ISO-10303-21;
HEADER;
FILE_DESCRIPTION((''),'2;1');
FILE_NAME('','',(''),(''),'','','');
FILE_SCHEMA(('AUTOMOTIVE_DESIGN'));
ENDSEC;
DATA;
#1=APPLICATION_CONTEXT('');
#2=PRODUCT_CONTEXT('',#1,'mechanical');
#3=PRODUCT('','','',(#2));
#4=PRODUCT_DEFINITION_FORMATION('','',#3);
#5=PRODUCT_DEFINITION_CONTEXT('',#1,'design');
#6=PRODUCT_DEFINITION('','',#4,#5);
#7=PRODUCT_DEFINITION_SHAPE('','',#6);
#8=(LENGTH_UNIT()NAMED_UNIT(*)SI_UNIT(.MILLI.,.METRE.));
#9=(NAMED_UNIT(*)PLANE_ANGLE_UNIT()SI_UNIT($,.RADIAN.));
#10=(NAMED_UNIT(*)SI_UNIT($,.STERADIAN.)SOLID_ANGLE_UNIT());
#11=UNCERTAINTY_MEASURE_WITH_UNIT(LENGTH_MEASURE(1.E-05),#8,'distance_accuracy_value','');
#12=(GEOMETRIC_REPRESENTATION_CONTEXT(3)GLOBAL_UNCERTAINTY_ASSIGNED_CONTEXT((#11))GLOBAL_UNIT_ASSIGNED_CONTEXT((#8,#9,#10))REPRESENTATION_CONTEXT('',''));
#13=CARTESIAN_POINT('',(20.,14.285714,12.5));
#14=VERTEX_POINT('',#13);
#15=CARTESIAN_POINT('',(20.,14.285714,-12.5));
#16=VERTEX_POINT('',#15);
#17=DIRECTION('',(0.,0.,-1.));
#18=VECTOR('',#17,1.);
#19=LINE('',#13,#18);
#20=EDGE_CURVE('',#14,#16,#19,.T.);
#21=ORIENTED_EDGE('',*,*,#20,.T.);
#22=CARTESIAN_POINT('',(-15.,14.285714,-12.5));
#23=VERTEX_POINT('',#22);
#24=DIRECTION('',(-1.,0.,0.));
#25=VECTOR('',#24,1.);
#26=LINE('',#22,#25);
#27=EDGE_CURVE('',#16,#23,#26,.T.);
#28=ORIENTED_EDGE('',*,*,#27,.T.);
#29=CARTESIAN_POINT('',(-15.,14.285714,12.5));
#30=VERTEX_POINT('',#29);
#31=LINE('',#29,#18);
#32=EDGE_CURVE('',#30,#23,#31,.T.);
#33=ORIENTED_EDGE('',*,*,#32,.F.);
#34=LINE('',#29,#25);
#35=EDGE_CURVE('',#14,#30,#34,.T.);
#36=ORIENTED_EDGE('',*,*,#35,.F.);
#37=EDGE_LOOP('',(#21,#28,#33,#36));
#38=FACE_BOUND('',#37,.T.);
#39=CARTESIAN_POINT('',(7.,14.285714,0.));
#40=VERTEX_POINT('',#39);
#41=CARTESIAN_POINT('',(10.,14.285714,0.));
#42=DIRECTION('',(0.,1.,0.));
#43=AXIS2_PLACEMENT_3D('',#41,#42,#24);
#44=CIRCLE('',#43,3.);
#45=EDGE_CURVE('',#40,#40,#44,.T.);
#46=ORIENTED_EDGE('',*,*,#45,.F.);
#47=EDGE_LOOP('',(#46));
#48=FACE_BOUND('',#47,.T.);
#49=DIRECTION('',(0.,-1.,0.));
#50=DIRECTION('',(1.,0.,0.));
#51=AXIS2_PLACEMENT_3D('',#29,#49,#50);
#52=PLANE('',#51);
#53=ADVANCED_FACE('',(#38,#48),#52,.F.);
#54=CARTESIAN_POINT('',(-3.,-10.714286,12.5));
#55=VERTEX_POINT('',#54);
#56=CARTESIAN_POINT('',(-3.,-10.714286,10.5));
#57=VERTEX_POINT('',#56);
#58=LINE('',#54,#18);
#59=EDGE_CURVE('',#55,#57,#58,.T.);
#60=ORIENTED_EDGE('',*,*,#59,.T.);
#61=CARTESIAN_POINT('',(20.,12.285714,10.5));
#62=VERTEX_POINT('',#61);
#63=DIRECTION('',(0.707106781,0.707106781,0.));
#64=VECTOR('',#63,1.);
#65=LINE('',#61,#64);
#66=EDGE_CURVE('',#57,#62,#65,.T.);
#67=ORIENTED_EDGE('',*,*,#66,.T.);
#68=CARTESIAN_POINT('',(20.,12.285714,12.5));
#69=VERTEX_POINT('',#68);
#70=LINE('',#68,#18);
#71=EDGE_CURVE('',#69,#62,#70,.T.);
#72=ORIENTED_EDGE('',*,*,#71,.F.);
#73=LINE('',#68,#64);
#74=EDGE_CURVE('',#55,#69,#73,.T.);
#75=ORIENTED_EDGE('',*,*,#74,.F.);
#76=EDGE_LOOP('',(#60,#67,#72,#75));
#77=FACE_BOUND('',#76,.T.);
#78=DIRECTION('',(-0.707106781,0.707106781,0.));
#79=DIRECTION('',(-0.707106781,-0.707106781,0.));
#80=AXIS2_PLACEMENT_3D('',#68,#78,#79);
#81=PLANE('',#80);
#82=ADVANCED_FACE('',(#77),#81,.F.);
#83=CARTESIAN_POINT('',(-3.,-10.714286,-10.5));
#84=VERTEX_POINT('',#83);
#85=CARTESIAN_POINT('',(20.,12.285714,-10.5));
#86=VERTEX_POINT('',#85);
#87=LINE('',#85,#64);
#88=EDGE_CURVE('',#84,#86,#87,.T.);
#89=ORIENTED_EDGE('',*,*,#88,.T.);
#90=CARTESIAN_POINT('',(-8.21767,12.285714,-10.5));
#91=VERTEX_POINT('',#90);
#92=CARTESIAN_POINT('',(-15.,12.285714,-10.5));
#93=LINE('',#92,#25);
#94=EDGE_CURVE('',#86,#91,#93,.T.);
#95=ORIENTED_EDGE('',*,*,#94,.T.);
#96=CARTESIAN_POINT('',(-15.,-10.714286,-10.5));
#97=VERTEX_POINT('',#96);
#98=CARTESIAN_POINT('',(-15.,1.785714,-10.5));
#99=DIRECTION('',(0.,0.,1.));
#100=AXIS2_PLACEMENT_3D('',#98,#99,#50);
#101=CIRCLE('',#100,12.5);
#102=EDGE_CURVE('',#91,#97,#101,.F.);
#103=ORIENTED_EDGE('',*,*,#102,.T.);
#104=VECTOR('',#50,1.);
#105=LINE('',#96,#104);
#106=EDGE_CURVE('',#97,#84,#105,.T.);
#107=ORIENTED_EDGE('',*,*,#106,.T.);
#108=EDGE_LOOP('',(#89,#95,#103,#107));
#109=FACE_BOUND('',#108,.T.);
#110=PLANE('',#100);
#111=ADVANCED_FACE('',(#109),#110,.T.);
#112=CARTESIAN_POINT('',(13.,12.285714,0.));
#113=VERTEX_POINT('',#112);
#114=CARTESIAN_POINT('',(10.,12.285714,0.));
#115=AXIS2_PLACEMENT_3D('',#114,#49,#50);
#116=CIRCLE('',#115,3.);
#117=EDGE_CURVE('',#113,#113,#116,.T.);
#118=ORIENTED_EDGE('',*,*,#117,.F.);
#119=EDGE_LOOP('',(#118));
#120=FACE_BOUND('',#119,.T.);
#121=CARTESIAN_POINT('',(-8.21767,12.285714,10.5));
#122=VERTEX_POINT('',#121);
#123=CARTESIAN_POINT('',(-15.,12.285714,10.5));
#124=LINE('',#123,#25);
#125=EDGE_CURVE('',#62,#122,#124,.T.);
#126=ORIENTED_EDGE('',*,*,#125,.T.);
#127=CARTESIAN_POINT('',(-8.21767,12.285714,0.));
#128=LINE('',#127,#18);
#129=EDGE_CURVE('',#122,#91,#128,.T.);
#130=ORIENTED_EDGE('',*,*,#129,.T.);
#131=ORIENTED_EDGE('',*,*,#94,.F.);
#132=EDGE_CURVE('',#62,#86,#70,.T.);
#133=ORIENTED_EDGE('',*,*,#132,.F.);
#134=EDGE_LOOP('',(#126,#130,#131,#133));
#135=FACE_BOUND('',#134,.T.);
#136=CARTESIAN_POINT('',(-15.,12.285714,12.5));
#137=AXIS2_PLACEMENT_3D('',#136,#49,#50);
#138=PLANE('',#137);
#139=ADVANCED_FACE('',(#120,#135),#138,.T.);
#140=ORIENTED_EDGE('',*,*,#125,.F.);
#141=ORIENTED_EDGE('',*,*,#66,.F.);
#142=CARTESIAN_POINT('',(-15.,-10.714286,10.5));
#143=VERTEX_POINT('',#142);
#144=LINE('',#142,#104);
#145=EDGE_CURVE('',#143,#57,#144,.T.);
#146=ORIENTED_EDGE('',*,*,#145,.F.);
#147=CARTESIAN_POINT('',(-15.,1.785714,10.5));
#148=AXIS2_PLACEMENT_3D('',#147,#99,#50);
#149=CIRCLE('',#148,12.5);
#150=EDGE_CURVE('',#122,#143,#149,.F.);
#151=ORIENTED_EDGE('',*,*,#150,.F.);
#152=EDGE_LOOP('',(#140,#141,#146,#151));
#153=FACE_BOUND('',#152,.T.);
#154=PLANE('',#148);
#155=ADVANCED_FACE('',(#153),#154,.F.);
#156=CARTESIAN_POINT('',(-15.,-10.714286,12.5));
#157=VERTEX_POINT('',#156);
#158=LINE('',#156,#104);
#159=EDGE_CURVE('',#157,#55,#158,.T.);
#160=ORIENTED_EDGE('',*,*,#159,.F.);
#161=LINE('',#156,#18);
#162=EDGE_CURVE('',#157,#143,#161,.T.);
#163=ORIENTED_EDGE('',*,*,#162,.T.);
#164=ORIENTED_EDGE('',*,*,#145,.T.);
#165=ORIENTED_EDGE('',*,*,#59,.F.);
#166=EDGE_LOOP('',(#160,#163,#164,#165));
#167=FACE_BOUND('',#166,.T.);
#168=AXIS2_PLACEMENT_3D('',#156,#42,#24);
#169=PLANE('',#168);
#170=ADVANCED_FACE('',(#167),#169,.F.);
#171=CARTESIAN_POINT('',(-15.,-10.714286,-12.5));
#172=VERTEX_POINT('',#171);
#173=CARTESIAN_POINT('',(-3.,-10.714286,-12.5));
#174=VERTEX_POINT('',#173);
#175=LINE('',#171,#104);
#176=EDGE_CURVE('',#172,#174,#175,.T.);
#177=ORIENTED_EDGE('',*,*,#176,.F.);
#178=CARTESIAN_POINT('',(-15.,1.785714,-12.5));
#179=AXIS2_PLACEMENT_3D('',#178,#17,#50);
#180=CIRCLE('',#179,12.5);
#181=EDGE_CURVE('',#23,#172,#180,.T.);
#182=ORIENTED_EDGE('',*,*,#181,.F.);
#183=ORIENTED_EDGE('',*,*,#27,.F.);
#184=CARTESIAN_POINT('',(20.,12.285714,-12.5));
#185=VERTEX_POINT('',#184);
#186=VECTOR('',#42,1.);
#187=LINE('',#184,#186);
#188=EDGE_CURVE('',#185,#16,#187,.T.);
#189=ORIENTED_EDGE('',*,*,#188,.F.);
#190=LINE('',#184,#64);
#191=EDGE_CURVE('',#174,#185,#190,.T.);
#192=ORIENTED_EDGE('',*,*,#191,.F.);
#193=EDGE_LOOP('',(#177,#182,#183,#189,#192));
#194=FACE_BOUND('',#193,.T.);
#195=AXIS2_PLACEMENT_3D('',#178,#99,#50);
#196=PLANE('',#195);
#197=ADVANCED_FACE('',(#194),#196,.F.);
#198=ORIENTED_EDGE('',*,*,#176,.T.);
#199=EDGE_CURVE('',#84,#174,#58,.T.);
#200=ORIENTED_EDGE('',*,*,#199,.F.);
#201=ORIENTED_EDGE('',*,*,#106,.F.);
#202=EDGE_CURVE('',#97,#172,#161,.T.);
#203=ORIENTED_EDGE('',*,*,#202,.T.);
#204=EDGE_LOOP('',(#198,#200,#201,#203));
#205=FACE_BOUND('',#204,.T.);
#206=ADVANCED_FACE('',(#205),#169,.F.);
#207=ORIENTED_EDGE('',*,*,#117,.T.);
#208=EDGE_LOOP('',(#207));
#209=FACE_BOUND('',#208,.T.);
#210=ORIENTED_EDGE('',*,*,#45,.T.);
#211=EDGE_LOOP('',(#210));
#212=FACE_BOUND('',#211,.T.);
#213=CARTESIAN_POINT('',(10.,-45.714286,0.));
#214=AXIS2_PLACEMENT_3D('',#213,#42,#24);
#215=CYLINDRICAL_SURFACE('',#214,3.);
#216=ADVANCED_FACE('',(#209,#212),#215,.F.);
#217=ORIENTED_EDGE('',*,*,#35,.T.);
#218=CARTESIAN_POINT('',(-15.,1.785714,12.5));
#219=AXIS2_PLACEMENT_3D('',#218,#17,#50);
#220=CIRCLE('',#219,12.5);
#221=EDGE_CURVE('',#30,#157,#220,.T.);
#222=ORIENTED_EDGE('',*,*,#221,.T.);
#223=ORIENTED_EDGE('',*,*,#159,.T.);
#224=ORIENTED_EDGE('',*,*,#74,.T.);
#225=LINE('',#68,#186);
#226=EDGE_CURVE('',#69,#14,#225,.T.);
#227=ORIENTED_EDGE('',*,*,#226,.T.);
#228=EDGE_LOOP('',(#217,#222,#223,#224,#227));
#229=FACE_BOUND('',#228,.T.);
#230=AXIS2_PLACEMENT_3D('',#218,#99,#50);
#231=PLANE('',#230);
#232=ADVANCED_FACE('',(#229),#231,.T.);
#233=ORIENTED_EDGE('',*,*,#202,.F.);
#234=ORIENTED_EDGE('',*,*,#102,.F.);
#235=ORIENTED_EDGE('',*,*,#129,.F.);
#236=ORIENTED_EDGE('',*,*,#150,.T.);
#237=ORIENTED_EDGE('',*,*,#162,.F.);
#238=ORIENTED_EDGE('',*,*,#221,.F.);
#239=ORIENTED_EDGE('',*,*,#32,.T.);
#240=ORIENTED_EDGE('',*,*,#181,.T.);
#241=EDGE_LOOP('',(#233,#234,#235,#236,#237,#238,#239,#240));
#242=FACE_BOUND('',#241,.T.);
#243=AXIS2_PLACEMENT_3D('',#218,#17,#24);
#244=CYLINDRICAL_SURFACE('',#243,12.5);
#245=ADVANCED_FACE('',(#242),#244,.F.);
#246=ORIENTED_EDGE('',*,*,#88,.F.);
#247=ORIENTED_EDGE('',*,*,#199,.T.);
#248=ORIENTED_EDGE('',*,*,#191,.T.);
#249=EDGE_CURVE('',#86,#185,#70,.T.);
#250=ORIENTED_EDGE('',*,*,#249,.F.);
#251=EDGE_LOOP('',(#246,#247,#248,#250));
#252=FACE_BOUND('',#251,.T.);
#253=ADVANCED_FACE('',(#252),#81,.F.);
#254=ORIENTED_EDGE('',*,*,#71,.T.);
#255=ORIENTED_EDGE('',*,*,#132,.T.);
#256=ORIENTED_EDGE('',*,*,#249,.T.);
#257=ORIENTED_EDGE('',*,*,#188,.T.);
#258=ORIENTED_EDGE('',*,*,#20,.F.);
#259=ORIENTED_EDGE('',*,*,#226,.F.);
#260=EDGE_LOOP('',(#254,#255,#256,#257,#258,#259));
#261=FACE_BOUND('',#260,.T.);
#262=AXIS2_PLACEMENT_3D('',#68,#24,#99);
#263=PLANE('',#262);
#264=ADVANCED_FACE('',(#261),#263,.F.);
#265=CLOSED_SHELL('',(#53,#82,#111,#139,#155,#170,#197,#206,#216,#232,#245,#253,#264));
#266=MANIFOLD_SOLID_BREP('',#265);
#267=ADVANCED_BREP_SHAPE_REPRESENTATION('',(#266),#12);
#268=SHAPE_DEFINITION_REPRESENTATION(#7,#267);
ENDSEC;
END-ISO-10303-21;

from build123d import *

# Parameters (mm, degrees)
DODANIE_WYCI_GNI_CIE1_DEPTH = 12.5
SKORUPA2_START              = -10.714285714
SKORUPA2_OUTLINE_W          = 37
SKORUPA2_OUTLINE_H          = 21
SKORUPA2_DEPTH              = 23
SZKIC2_R                    = 3
SZKIC2_R_2                  = 4
WYTNIJ_WYCI_GNI_CIE1_DEPTH  = 60


# Read off the part's stored shape, not the designer's step: Skorupa2
with BuildPart() as part:
    # Szkic1 → Dodanie-wyciągnięcie1 (new, symmetric)
    with BuildSketch(Plane.XY):
        with BuildLine():
            Line((20, 12.285714286), (-3, -10.714285714))
            Line((-3, -10.714285714), (-15, -10.714285714))
            ThreePointArc((-15, -10.714285714), (-2.5, 1.785714286), (-15, 14.285714286))
            Line((-15, 14.285714286), (20, 14.285714286))
            Line((20, 14.285714286), (20, 12.285714286))
        make_face()
    extrude(amount=DODANIE_WYCI_GNI_CIE1_DEPTH, both=True)

    # Skorupa2 outline → Skorupa2 (cut)
    with BuildSketch(Plane(origin=(0, 0, 0), x_dir=(1, 0, 0), z_dir=(0, 1, 0)).offset(SKORUPA2_START)):
        with Locations((2.5, 0)):
            Rectangle(SKORUPA2_OUTLINE_W, SKORUPA2_OUTLINE_H)
    extrude(amount=SKORUPA2_DEPTH, mode=Mode.SUBTRACT)

    # Szkic2 → Wytnij-wyciągnięcie1 (cut)
    with BuildSketch(Plane(origin=(0, 14.285714286, 0), x_dir=(1, 0, 0), z_dir=(0, 1, 0))):
        with Locations(Location((10, 0, 0), (0, 0, 180))):
            Circle(SZKIC2_R)
        with Locations((8, -24.919871589)):
            Circle(SZKIC2_R_2)
    extrude(amount=-WYTNIJ_WYCI_GNI_CIE1_DEPTH, mode=Mode.SUBTRACT)


solid = part.part
